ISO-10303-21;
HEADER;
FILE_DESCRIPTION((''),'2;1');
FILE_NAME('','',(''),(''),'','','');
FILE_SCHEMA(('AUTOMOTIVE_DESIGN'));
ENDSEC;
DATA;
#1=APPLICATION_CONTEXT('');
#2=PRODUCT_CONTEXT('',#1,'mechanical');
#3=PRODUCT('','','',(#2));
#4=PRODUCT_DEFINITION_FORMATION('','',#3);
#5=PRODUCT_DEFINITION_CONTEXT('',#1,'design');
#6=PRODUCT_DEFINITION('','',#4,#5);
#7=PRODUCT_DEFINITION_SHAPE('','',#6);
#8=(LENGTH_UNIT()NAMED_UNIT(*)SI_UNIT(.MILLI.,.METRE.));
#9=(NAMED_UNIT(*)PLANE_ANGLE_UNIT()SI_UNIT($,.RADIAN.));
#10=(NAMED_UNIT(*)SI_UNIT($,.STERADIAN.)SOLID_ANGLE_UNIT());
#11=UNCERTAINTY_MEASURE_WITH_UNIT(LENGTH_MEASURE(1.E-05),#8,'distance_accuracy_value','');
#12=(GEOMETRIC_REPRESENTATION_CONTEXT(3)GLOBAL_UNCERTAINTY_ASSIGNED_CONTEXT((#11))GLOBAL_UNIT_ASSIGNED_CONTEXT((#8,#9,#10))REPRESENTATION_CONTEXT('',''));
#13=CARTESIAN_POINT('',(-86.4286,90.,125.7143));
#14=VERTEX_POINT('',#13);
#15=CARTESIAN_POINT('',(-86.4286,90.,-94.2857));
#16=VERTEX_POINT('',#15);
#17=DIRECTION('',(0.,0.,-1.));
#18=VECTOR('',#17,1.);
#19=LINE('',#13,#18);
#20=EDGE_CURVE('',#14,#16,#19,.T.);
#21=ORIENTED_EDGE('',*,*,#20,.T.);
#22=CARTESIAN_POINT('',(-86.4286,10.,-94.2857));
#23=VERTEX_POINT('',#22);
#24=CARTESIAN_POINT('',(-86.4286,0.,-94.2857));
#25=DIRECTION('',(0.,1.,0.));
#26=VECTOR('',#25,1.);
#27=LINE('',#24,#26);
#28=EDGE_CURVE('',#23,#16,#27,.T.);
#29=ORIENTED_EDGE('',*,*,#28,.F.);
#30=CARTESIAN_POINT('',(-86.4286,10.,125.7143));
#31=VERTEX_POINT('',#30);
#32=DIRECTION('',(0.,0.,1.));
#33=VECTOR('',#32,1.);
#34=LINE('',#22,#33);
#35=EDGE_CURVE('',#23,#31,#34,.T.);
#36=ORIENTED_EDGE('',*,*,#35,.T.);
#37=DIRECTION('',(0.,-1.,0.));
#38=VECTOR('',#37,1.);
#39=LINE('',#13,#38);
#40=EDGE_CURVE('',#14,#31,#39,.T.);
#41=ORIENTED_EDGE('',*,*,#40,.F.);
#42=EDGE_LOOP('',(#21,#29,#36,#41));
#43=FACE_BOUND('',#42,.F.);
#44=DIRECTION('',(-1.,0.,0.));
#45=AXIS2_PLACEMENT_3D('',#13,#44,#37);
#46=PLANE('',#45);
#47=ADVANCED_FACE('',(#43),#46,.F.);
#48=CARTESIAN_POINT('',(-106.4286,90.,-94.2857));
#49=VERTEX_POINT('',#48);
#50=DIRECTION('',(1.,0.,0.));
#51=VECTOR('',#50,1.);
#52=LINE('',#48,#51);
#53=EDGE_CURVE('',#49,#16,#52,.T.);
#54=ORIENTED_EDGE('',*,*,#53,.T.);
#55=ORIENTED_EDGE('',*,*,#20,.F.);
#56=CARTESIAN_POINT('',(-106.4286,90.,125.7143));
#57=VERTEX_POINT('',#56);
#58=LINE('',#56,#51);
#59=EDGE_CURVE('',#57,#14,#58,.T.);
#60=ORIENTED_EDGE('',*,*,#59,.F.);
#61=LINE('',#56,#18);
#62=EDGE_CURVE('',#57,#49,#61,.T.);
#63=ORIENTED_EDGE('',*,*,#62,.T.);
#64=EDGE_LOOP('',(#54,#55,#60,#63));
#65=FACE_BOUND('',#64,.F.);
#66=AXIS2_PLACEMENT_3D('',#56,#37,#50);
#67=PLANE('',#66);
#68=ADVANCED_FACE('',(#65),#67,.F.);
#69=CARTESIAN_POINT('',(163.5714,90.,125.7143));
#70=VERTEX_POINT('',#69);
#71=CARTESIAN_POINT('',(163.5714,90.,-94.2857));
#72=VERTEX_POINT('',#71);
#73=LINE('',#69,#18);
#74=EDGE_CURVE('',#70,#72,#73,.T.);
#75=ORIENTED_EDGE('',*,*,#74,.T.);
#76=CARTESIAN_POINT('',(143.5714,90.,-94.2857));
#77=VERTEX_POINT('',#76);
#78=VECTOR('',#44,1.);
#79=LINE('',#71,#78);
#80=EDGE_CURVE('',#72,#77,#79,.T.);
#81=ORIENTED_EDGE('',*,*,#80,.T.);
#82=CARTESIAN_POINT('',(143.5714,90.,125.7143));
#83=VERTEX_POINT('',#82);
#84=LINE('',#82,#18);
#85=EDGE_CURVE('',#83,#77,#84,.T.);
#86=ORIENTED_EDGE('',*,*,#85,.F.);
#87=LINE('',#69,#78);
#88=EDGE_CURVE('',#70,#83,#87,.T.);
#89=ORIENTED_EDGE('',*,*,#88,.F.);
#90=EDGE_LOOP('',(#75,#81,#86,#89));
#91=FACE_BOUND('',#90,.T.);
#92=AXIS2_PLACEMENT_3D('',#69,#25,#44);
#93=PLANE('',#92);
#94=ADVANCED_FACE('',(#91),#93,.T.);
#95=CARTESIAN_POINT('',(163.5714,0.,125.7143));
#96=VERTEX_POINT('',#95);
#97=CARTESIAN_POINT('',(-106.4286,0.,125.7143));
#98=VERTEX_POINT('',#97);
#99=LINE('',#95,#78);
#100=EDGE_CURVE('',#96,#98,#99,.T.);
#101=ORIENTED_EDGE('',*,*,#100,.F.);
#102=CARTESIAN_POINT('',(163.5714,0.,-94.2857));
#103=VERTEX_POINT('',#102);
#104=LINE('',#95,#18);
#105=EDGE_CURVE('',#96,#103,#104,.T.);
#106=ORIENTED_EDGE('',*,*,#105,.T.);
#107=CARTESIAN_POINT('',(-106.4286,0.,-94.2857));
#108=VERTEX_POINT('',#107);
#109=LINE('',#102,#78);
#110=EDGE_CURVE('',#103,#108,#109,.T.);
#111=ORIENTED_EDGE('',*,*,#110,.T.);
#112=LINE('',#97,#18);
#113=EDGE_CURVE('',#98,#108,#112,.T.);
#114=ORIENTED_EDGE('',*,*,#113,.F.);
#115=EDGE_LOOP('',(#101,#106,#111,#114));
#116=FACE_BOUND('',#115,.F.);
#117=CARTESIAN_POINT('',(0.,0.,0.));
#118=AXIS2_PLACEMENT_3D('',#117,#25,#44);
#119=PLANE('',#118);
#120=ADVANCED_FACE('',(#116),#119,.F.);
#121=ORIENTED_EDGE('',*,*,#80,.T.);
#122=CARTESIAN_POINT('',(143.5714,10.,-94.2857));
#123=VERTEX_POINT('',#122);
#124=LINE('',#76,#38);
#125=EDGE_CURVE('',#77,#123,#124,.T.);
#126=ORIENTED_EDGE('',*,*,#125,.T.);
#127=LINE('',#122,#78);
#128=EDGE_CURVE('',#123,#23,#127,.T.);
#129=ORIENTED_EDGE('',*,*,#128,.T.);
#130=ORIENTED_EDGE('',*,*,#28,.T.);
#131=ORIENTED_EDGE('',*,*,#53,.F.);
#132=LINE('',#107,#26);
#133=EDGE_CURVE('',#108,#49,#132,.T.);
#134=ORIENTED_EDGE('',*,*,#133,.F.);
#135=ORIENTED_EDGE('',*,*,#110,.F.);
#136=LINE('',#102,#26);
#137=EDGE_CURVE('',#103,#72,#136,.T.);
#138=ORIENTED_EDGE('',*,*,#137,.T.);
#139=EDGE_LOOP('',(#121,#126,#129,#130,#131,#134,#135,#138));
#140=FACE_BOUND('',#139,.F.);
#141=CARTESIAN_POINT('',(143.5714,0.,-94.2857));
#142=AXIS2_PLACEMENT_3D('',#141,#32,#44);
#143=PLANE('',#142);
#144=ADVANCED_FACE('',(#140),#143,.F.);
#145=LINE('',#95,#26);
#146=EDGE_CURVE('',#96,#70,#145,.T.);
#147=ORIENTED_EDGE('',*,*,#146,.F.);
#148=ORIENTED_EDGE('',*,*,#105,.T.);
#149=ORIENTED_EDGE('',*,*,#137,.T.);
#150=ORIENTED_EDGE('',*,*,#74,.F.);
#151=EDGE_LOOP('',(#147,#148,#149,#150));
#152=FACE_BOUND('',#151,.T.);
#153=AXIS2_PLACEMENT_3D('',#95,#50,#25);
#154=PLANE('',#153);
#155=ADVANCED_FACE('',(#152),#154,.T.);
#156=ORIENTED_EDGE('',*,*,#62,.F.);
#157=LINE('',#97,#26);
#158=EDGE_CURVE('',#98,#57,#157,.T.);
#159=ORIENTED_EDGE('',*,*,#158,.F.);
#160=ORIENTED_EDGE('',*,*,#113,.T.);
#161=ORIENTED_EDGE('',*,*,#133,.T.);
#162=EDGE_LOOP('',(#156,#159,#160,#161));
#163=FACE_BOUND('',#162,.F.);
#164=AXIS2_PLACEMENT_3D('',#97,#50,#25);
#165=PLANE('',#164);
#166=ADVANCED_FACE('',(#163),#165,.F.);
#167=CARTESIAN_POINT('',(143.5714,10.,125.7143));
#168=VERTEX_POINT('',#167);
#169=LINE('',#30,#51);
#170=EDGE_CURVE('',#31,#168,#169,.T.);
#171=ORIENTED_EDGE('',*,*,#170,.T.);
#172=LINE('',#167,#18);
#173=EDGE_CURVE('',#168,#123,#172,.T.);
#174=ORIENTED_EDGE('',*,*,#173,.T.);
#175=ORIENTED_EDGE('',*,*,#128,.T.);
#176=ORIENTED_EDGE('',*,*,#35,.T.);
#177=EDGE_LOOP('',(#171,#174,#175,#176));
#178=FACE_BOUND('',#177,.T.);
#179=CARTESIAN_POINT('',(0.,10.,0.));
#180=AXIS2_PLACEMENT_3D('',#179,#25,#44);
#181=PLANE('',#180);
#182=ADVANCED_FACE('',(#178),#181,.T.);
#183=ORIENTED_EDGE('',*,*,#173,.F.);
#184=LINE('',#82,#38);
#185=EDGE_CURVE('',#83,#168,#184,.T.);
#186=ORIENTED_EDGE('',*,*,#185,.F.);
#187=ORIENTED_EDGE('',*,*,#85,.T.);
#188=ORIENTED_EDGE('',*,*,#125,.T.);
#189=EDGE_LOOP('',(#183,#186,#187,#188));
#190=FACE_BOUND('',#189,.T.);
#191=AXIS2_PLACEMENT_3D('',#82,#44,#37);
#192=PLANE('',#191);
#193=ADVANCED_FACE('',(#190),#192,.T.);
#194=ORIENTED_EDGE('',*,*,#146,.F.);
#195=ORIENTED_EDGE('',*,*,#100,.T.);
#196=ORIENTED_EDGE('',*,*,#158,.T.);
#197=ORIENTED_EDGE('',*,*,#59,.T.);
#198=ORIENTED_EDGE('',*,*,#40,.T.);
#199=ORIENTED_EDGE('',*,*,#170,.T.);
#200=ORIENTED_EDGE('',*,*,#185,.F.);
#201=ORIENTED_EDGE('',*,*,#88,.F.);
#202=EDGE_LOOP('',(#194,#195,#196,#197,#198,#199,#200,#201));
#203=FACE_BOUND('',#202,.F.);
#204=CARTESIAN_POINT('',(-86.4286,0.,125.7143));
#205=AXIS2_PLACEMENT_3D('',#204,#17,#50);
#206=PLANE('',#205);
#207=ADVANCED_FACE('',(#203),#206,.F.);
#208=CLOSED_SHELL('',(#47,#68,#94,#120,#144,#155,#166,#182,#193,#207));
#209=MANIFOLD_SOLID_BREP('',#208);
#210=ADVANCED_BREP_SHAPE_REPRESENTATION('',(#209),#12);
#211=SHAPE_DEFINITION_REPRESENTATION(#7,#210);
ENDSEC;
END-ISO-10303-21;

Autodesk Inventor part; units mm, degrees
ref_plane "YZ Plane" through (0, 0, 0) normal (1, 0, 0) x (0, 1, 0)
ref_plane "XZ Plane" through (0, 0, 0) normal (0, 1, 0) x (-1, 0, 0)
ref_plane "XY Plane" through (0, 0, 0) normal (0, 0, 1) x (1, 0, 0)
sketch "Sketch1" plane through (0, 0, 0) normal (0, 1, 0) x (-1, 0, 0)
  line L0 (86.4286, 125.7143) -> (-143.5714, 125.7143)
  line L1 (-143.5714, 125.7143) -> (-143.5714, -94.2857)
  line L2 (-143.5714, -94.2857) -> (86.4286, -94.2857)
  line L3 (86.4286, -94.2857) -> (86.4286, 125.7143)
  point P0 (0, 0)
  dimension "d0" = 220
  dimension "d1" = 230
extrude "Extrusion1" add sketch "Sketch1" along normal blind 10
sketch "Sketch5" plane through (-86.4286, 0, 125.7143) normal (0, 0, 1) x (1, 0, 0)
  line L0 (0, 0) -> (0, 10) projected
  line L1 (0, 0) -> (-20, 0)
  line L2 (-20, 0) -> (-20, 90)
  line L3 (-20, 90) -> (0, 90)
  line L4 (0, 90) -> (0, 0)
  line L5 (230, 0) -> (0, 0) projected
  line L6 (230, 0) -> (250, 0)
  line L7 (250, 0) -> (250, 90)
  line L8 (250, 90) -> (230, 90)
  line L9 (230, 90) -> (230, 0)
  point P0 (86.4286, 0)
  dimension "d22" = 90
  dimension "d23" = 20
  dimension "d24" = 20
extrude "Extrusion5" add sketch "Sketch5" against normal up to surface (220 mm away)
properties part number "Podkladka" material "Aluminum 6061"
